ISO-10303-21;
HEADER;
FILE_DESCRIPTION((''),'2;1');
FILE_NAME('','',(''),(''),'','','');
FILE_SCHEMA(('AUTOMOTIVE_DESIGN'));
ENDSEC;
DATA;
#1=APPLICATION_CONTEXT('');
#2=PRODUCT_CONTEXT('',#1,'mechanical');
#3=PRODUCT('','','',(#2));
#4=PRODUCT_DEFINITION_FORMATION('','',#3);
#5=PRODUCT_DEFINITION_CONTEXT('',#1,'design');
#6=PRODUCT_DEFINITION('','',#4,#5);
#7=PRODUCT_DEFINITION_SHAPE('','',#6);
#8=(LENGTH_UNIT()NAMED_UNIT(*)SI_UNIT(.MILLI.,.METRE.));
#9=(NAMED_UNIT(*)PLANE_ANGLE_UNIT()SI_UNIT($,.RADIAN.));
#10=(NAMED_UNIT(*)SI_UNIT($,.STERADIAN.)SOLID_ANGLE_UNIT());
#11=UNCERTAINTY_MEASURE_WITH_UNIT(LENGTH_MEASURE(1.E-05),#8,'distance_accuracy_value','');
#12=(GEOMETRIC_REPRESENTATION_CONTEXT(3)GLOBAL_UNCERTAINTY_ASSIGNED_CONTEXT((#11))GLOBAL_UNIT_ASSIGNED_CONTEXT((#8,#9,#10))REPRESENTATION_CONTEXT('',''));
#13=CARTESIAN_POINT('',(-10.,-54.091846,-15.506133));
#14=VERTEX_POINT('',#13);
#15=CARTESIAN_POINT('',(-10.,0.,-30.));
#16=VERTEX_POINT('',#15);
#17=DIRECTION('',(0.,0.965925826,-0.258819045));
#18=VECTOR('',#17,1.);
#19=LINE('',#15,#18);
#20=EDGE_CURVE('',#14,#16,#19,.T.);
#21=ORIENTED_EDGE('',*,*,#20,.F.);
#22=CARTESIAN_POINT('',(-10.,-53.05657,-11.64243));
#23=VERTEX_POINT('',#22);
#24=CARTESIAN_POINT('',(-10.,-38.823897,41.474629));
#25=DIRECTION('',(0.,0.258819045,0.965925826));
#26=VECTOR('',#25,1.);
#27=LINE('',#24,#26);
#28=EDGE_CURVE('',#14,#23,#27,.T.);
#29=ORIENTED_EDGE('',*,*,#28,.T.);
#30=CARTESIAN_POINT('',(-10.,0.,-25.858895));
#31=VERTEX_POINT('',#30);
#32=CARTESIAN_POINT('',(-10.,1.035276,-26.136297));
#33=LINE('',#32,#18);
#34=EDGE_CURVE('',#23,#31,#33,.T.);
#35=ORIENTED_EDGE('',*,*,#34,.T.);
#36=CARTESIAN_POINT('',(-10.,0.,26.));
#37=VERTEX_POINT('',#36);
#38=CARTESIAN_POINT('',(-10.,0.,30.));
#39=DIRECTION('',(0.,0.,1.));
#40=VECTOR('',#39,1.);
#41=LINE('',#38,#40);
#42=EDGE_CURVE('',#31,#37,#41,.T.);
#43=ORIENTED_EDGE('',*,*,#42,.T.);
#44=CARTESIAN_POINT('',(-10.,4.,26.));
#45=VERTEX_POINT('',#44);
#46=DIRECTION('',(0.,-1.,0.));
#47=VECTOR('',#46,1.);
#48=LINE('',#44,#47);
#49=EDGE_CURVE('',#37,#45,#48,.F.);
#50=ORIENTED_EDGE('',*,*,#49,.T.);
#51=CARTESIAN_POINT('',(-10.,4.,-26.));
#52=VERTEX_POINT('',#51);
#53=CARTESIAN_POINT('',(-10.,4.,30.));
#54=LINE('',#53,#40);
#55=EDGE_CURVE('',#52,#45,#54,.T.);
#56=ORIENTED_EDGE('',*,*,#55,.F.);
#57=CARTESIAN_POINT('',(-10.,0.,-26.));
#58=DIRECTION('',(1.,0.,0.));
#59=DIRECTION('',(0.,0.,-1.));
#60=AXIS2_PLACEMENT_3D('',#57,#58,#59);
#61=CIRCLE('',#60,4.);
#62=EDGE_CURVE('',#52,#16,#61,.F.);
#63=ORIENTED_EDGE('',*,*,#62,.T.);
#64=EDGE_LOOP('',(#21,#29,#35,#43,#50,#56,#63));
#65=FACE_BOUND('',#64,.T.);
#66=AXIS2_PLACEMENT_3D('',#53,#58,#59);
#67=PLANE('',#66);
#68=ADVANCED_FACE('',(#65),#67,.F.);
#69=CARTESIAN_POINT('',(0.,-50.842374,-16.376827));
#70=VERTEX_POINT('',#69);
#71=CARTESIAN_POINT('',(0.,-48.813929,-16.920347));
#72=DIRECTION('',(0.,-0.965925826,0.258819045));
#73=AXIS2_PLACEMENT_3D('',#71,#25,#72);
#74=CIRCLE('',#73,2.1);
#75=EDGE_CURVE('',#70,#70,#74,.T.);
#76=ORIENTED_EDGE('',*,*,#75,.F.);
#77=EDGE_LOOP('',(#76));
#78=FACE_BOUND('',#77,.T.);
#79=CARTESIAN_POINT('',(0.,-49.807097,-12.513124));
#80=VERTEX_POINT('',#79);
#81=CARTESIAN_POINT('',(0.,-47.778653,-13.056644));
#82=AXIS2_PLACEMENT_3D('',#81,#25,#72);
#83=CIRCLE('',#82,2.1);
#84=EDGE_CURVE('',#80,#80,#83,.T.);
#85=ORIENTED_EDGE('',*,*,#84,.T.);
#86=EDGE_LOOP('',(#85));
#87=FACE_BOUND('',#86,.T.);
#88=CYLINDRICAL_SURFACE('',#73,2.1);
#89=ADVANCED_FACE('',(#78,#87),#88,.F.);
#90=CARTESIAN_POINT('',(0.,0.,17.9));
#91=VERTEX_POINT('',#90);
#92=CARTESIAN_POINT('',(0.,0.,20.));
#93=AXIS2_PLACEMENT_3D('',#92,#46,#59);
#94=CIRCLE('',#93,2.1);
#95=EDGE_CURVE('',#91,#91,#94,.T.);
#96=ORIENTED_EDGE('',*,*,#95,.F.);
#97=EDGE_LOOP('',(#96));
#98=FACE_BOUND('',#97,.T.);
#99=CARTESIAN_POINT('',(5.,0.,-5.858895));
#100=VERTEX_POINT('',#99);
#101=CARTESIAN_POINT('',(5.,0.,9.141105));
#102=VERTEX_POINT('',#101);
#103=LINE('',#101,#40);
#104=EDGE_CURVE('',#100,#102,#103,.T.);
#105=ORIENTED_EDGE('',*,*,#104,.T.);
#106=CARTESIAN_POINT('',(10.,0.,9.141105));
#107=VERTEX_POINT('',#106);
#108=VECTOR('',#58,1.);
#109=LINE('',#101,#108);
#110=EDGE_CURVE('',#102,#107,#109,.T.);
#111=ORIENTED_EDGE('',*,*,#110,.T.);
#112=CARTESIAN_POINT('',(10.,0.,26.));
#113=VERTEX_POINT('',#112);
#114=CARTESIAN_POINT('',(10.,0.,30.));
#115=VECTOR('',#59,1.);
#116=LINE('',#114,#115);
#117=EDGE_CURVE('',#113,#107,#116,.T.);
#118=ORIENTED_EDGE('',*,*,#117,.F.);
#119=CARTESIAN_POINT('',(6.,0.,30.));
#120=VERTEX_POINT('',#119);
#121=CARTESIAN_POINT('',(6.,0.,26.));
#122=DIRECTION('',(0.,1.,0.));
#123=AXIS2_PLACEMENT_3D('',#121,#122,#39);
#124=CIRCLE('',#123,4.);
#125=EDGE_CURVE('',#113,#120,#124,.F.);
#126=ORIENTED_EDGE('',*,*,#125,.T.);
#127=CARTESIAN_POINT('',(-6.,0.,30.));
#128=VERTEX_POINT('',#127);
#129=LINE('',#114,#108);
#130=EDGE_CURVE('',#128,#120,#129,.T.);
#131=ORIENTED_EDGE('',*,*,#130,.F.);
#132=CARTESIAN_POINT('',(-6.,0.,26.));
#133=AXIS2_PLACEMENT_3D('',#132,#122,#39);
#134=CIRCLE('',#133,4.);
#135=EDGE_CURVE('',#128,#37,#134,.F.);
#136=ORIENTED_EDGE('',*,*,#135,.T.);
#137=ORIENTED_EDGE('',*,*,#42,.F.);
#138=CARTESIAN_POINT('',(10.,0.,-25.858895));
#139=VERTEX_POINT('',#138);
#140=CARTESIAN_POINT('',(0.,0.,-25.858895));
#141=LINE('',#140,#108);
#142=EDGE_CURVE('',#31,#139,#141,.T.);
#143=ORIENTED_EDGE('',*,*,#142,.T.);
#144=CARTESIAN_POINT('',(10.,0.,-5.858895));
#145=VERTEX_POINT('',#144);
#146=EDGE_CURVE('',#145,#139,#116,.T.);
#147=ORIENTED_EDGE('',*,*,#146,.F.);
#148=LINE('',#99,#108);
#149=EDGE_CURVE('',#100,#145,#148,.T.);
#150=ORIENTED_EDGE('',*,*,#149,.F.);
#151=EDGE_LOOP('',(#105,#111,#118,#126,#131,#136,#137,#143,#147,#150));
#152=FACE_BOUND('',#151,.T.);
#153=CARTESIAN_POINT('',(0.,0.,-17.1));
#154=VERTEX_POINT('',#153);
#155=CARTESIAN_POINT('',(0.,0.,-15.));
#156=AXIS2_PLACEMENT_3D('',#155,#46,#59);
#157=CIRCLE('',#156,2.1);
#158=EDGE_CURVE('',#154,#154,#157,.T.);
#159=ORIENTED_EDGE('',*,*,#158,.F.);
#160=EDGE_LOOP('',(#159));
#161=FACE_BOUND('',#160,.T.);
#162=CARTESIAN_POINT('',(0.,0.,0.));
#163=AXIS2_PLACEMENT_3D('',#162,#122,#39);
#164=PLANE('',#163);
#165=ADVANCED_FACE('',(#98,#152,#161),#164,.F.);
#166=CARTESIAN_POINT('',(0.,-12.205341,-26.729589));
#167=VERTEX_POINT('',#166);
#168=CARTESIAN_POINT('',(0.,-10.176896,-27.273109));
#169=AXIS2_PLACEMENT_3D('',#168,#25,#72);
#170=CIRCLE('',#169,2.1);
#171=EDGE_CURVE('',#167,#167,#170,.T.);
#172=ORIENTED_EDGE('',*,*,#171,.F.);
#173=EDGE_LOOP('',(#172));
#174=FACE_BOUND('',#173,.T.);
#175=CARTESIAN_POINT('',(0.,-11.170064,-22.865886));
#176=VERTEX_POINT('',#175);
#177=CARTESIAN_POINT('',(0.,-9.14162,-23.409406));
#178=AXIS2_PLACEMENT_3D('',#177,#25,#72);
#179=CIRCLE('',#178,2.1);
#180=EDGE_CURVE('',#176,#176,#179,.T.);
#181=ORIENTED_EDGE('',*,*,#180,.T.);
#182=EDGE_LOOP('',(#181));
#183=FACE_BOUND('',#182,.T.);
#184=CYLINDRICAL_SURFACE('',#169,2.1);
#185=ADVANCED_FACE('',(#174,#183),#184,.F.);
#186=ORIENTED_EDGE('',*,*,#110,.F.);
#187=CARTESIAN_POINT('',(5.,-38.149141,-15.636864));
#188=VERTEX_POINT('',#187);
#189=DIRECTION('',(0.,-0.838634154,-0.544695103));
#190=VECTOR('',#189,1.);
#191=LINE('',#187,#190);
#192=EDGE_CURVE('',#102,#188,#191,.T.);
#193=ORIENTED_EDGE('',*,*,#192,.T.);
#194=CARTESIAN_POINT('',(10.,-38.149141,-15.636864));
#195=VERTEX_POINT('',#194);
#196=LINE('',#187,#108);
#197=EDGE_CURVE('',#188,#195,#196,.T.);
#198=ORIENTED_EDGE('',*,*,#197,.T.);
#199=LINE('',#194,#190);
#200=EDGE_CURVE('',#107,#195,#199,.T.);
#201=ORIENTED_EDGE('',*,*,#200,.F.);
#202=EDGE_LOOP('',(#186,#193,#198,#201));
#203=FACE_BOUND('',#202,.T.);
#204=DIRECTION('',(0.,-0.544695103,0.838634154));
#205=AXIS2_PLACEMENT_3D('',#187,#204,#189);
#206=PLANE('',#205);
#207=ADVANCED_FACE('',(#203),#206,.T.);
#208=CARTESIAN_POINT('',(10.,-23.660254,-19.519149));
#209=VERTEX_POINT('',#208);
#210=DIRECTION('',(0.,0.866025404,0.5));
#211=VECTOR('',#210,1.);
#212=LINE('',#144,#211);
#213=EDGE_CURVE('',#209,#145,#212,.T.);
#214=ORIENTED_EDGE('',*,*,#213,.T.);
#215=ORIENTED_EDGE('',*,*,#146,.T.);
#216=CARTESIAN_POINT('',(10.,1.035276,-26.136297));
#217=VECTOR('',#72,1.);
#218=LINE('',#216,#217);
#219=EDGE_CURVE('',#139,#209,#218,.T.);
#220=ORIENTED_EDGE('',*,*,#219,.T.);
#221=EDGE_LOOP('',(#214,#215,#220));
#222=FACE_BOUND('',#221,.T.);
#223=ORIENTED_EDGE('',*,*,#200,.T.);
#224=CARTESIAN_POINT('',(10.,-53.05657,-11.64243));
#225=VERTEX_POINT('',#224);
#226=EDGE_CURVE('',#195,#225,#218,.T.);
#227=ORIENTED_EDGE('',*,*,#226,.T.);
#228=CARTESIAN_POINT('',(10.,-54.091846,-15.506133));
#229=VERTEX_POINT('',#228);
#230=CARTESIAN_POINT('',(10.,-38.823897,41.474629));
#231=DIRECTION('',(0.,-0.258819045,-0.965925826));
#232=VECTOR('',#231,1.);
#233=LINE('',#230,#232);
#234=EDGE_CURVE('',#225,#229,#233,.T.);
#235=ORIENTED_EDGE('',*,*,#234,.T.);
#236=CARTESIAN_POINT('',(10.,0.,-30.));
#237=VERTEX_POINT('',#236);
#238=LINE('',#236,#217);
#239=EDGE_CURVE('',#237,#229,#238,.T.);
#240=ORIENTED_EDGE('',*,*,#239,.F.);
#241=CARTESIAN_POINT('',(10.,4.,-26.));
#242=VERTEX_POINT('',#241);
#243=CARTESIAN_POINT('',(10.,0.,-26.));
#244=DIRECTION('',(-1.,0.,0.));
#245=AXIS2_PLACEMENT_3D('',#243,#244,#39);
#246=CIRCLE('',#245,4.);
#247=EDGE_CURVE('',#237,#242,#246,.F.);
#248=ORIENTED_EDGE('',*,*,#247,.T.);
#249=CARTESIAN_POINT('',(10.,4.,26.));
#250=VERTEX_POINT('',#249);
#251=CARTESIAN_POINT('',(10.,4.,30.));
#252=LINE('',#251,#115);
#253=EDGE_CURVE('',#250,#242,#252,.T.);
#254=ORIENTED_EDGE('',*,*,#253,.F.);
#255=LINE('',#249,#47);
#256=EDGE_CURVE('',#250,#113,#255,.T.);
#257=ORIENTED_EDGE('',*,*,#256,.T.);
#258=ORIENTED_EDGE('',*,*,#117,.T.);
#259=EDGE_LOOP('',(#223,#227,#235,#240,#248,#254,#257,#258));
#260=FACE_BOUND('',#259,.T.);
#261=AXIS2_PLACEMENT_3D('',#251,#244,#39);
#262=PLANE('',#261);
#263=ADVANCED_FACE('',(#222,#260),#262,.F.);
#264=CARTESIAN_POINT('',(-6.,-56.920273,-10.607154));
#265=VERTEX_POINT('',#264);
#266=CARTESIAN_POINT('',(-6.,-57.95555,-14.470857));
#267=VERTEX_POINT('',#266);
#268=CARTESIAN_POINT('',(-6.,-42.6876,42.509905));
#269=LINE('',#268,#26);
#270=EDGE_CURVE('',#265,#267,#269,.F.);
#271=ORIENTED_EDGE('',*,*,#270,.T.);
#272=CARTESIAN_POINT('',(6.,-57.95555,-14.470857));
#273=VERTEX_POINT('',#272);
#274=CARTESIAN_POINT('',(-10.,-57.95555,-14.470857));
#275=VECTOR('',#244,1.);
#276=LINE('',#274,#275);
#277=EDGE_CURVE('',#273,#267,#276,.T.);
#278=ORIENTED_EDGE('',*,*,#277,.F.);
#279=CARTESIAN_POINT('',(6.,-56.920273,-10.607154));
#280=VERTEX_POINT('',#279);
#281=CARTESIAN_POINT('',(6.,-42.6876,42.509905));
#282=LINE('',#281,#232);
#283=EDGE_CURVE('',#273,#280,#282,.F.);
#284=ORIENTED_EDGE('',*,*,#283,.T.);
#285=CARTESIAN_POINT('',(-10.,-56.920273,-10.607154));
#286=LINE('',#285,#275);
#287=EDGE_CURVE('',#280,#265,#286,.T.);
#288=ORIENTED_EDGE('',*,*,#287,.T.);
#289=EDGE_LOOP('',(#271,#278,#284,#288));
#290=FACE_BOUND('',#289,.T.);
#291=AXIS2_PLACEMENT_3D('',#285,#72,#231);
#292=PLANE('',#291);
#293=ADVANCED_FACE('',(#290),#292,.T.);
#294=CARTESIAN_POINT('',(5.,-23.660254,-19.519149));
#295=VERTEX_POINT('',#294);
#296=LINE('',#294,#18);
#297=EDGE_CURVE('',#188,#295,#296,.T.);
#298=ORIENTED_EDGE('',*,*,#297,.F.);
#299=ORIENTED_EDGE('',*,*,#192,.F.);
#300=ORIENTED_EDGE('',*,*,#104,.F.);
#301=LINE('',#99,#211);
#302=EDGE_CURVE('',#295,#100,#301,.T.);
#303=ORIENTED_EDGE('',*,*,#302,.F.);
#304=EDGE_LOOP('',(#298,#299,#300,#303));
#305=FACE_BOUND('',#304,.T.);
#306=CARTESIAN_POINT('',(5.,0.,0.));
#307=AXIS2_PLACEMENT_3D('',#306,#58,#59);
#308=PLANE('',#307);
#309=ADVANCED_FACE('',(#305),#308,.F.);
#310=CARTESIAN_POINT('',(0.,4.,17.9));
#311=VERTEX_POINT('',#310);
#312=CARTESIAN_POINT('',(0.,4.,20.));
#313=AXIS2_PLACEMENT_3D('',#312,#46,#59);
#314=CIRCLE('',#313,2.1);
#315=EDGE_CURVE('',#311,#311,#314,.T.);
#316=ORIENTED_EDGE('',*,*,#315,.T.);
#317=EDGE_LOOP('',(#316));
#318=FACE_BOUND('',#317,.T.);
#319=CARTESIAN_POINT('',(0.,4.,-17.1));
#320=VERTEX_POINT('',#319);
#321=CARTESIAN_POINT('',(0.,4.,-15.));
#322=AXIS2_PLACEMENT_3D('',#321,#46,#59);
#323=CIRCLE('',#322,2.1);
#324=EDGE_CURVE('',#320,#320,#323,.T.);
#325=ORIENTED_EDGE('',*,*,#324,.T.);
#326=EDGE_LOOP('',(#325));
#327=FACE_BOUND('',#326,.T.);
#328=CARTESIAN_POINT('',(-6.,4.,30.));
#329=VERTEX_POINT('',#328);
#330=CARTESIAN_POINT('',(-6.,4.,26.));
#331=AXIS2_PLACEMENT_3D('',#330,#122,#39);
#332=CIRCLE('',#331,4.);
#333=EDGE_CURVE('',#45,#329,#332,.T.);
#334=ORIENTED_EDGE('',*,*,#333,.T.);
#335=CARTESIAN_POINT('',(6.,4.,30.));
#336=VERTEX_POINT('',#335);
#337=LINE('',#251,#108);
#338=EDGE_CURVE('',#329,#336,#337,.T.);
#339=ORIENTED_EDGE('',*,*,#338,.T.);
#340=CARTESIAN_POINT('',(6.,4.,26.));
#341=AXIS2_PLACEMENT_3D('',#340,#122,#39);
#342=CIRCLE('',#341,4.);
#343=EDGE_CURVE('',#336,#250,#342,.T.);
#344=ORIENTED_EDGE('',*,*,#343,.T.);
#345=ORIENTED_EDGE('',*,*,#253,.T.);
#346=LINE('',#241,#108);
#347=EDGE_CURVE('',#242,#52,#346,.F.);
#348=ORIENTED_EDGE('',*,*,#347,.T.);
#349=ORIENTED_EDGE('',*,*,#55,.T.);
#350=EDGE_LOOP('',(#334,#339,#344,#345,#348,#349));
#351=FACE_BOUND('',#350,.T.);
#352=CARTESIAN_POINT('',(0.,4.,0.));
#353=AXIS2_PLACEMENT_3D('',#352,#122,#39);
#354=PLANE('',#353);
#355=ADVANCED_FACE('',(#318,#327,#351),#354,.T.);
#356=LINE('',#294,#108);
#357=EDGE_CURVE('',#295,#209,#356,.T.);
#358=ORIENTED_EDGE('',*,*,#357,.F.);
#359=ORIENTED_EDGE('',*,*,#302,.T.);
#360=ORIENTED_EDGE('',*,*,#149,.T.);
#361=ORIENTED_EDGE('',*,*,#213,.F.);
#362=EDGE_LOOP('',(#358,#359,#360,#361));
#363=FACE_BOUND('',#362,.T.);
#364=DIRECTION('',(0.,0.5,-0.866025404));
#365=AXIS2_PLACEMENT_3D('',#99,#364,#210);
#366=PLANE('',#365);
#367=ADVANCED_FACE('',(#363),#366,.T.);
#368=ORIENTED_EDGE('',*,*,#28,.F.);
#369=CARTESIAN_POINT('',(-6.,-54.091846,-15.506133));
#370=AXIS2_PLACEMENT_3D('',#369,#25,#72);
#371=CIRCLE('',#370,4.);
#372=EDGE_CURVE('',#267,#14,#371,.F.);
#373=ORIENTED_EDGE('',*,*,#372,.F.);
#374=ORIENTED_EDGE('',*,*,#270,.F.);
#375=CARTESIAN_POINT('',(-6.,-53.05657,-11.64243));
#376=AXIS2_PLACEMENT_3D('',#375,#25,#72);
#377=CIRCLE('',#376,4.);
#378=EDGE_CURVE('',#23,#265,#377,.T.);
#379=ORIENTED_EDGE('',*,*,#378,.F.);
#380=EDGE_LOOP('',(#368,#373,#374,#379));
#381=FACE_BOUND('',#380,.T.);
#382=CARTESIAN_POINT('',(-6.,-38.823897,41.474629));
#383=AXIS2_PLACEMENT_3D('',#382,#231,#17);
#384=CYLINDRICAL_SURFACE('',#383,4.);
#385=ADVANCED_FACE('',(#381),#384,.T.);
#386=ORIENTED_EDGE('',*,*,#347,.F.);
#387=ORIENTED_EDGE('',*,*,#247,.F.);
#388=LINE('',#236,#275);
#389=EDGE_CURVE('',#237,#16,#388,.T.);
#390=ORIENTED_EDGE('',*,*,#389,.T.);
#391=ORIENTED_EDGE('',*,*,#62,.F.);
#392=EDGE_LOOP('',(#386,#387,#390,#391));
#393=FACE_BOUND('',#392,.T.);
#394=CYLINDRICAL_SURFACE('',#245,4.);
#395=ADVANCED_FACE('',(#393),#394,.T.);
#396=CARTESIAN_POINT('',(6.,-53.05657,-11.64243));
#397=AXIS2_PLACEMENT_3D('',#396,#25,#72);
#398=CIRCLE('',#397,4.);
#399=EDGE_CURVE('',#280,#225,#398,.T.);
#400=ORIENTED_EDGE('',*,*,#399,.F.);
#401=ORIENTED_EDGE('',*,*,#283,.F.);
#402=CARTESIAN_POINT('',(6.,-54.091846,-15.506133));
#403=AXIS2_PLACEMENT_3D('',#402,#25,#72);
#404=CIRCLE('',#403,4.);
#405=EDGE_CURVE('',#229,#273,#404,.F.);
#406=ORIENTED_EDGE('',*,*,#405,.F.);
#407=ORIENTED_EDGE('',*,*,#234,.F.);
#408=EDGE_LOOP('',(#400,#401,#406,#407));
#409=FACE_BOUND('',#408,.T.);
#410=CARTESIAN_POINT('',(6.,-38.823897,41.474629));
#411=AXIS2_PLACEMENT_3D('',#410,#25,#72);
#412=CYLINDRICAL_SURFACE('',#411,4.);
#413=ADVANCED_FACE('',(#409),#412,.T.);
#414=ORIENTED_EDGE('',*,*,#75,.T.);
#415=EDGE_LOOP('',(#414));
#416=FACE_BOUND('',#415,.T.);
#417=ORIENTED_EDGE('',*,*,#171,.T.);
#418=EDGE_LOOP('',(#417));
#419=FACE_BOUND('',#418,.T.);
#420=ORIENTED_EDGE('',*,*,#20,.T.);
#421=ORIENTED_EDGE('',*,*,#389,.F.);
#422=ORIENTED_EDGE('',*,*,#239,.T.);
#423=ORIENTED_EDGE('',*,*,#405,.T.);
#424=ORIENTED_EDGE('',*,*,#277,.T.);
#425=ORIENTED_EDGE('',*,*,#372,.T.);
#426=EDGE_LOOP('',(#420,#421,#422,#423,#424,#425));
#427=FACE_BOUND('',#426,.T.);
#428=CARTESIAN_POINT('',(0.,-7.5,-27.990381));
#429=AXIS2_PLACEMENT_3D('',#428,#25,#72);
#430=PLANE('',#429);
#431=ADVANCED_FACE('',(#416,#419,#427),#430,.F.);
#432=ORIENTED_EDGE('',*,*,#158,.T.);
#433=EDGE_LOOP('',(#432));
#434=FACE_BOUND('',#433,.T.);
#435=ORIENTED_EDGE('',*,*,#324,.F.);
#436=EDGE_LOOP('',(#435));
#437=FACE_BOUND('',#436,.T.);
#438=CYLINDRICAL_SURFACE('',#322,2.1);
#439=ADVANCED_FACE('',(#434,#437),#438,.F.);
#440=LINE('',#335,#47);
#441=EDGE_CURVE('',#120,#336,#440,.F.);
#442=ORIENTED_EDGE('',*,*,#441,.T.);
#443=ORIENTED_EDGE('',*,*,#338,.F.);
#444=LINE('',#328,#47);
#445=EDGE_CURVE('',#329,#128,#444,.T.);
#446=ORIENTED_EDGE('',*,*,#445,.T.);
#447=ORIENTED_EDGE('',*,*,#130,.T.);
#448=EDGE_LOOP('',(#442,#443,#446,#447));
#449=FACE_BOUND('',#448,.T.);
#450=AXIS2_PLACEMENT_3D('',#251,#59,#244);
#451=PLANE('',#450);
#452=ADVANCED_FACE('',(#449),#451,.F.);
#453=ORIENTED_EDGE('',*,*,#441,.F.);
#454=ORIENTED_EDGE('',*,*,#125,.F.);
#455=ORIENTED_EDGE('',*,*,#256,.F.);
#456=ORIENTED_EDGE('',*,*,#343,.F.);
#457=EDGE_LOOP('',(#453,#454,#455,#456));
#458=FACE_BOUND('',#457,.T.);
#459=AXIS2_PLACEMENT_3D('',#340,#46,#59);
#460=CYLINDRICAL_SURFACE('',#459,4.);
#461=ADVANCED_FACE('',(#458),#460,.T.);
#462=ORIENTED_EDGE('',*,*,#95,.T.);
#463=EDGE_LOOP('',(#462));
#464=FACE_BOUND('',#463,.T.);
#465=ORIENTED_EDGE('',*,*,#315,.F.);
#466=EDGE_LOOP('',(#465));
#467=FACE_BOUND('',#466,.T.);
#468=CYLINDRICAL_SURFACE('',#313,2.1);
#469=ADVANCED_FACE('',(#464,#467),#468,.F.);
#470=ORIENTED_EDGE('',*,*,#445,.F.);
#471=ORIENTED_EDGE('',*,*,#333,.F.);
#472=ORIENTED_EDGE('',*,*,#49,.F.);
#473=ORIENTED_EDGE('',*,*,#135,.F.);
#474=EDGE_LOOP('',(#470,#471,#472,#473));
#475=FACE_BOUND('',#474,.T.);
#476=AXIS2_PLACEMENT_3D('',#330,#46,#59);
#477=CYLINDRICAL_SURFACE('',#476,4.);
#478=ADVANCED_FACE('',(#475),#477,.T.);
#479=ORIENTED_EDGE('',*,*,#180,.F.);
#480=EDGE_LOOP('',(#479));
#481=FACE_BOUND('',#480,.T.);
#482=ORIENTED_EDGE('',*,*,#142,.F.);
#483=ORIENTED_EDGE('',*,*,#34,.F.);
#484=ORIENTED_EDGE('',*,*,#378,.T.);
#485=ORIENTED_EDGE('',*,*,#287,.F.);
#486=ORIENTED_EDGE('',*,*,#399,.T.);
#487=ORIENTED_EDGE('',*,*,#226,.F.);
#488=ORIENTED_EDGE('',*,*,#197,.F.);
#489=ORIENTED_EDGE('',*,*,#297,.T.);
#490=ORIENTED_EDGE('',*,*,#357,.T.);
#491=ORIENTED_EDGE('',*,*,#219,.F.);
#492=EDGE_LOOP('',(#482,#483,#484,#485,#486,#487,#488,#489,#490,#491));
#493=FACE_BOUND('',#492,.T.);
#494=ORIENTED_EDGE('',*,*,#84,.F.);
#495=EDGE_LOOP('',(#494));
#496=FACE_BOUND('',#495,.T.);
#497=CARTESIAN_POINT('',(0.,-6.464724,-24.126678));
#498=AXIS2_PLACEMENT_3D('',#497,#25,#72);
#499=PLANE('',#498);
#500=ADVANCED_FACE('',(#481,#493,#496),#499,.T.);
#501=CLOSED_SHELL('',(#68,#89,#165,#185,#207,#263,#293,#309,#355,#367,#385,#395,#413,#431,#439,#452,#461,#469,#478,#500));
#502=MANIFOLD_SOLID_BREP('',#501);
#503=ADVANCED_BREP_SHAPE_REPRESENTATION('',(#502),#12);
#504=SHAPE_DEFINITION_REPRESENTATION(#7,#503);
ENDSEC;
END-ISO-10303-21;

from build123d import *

# Parameters (mm, degrees)
SKETCH1_W           = 20
SKETCH1_H           = 60
BOSS_EXTRUDE1_DEPTH = 4
SKETCH6_W           = 20
SKETCH6_H           = 60
BOSS_EXTRUDE3_DEPTH = 4
FILLET6_R           = 4
SKETCH7_R           = 2.1
CUT_EXTRUDE3_DEPTH  = 4
SKETCH8_R           = 2.1
CUT_EXTRUDE4_DEPTH  = 4
FILLET7_R           = 4
FILLET8_R           = 4
FILLET9_R           = 4
FILLET10_R          = 4
BOSS_EXTRUDE5_DEPTH = 5


with BuildPart() as part:
    # Sketch1 → Boss-Extrude1 (new body)
    with BuildSketch(Plane(origin=(0, 0, 0), x_dir=(1, 0, 0), z_dir=(0, 1, 0))):
        Rectangle(SKETCH1_W, SKETCH1_H)
    extrude(amount=BOSS_EXTRUDE1_DEPTH)

    # Sketch6 → Boss-Extrude3 (add)
    with BuildSketch(Plane(origin=(0, -7.5, -27.990381057), x_dir=(-1, 0, 0), z_dir=(0, -0.25881904510251796, -0.9659258262890691))):
        with Locations((0, -22.235428647)):
            Rectangle(SKETCH6_W, SKETCH6_H)
    extrude(amount=-BOSS_EXTRUDE3_DEPTH)

    # Fillet6
    fillet6_edges = [part.edges().sort_by_distance(p)[0] for p in [
        (0, 4, -30),
    ]]
    fillet(fillet6_edges, radius=FILLET6_R - 0.0001)  # a hair under: the kernel refuses the full size

    # Sketch7 → Cut-Extrude3 (cut)
    with BuildSketch(Plane.XZ):
        with Locations(Location((0, 20, 0), (0, 0, 270))):
            Circle(SKETCH7_R)
        with Locations(Location((0, -15, 0), (0, 0, 270))):
            Circle(SKETCH7_R)
    extrude(amount=-CUT_EXTRUDE3_DEPTH, mode=Mode.SUBTRACT)

    # Sketch8 → Cut-Extrude4 (cut)
    with BuildSketch(Plane(origin=(0, -6.46472382, -24.126677752), x_dir=(1, 0, 0), z_dir=(0, 0.25881904510251796, 0.9659258262890691))):
        with Locations(Location((0, -2.771327032, 0), (0, 0, 270))):
            Circle(SKETCH8_R)
        with Locations(Location((0, -42.771327032, 0), (0, 0, 270))):
            Circle(SKETCH8_R)
    extrude(amount=-CUT_EXTRUDE4_DEPTH, mode=Mode.SUBTRACT)

    # Fillet7
    fillet7_edges = [part.edges().sort_by_distance(p)[0] for p in [
        (-10, -57.437911487, -12.539005641),
    ]]
    fillet(fillet7_edges, radius=FILLET7_R)

    # Fillet8
    fillet8_edges = [part.edges().sort_by_distance(p)[0] for p in [
        (10, -57.437911487, -12.539005641),
    ]]
    fillet(fillet8_edges, radius=FILLET8_R)

    # Fillet9
    fillet9_edges = [part.edges().sort_by_distance(p)[0] for p in [
        (10, 2, 30),
    ]]
    fillet(fillet9_edges, radius=FILLET9_R)

    # Fillet10
    fillet10_edges = [part.edges().sort_by_distance(p)[0] for p in [
        (-10, 2, 30),
    ]]
    fillet(fillet10_edges, radius=FILLET10_R)

    # Brace → Boss-Extrude5 (add)
    with BuildSketch(Plane(origin=(10, 0, 0), x_dir=(0, 0, -1), z_dir=(1, 0, 0))):
        Polygon((15.63686364, -38.149141432), (-9.141104722, 0), (5.858895278, 0), (19.519149316, -23.660254038), align=None)
    extrude(amount=-BOSS_EXTRUDE5_DEPTH)


solid = part.part
